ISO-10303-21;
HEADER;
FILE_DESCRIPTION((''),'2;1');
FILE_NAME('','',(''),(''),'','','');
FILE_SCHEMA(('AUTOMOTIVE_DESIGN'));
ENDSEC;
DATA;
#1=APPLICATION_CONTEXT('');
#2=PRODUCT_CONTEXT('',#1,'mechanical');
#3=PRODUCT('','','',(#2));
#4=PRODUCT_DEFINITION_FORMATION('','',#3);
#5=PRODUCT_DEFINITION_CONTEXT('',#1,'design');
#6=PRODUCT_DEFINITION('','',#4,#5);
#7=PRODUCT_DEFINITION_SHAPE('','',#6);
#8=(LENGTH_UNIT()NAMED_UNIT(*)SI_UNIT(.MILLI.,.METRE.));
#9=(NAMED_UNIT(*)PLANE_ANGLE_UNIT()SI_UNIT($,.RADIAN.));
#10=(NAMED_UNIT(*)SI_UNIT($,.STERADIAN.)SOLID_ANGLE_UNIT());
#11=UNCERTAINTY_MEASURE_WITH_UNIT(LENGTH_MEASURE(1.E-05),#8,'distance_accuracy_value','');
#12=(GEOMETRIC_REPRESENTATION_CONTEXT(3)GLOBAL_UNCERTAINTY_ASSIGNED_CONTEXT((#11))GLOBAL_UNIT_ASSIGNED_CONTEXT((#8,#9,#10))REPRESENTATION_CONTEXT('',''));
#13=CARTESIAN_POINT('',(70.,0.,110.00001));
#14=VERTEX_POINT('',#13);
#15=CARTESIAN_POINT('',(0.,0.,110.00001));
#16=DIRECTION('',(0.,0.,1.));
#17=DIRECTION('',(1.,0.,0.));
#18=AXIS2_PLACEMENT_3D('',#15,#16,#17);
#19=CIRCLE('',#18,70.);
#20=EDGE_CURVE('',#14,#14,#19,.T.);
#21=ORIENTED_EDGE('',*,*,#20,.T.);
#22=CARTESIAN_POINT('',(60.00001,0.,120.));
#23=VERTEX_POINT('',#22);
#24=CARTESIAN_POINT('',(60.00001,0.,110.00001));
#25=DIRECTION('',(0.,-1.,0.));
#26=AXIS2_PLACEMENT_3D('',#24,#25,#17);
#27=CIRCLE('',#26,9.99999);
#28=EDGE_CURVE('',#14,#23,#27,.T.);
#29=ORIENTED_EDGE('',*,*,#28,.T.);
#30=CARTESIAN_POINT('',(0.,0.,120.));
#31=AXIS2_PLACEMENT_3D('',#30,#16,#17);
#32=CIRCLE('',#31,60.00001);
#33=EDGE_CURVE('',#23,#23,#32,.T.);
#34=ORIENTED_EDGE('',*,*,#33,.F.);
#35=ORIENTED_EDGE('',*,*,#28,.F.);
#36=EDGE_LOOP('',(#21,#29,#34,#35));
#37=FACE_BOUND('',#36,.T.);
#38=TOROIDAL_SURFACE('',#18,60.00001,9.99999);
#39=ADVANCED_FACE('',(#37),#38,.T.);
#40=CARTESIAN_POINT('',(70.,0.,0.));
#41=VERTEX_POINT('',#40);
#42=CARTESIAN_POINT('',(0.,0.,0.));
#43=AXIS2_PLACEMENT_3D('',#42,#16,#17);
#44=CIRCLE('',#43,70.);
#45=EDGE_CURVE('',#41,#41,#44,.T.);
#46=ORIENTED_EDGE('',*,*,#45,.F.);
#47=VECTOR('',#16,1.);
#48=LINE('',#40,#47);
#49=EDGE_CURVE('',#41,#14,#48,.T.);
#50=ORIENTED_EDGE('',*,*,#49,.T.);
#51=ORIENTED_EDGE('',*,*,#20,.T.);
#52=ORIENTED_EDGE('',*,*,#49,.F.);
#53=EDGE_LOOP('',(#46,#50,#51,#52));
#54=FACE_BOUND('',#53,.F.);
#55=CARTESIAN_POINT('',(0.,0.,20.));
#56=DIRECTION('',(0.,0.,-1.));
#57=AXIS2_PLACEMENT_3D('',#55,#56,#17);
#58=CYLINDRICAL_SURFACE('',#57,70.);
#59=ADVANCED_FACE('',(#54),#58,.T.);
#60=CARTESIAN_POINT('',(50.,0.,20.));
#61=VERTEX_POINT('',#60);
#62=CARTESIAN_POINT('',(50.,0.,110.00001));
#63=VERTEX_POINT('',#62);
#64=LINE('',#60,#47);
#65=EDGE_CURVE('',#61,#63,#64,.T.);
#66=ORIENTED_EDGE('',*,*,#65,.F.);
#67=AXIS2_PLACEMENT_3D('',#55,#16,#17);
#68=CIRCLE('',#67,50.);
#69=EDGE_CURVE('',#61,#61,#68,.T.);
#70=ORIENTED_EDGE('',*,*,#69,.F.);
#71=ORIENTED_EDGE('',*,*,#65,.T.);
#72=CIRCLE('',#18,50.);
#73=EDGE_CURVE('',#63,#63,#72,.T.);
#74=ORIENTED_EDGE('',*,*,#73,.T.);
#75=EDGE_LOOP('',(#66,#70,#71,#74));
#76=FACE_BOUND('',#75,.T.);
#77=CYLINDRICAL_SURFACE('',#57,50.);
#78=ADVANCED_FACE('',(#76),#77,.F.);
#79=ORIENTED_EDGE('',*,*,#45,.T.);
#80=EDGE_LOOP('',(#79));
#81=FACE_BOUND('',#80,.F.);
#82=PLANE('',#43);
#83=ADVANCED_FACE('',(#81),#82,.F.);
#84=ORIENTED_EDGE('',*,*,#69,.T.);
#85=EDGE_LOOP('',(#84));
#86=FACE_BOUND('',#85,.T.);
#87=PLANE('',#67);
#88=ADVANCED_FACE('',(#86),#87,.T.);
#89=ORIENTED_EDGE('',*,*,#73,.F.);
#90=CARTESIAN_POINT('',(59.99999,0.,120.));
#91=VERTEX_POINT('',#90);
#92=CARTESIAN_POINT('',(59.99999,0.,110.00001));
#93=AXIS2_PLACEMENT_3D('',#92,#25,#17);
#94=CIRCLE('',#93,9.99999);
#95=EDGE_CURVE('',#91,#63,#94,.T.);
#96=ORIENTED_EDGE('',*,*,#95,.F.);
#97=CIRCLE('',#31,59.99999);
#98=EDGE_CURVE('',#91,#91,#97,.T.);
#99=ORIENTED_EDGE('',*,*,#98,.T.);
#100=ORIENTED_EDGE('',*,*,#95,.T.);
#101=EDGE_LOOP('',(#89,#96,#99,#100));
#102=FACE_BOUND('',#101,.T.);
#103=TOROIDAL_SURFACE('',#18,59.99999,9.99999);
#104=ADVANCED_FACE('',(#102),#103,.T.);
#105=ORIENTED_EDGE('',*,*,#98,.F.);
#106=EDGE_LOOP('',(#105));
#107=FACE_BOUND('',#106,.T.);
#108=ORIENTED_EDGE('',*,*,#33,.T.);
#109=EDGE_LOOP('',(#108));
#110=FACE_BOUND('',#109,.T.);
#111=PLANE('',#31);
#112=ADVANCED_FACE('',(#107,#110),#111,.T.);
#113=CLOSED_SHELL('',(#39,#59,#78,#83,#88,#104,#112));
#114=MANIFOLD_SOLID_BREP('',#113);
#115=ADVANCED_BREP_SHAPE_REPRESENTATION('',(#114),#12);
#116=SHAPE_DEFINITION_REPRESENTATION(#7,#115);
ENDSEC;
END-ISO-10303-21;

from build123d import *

# Parameters (mm, degrees)
F2_R     = 70
F3_DEPTH = 20
F4_R     = 70
F4_R_2   = 50
F5_DEPTH = 100
F6_R     = 9.99999


# Not quite as in the source:
# - a fillet or chamfer is up to 0.001 mm smaller than in the source, because OpenCascade refuses the exact size


with BuildPart() as f3:
    # F2 (on Top) → F3 (new body)
    with BuildSketch(Plane.XY):
        Circle(F2_R)
    extrude(amount=F3_DEPTH)

    # F4 (on face) → F5 (join)
    with BuildSketch(Plane.XY.offset(20)):
        Circle(F4_R)
        Circle(F4_R_2, mode=Mode.SUBTRACT)
    extrude(amount=F5_DEPTH)

    # F6 (radius 10 in the source; OpenCascade refuses exactly that, so slightly less here)
    f6_edges = [f3.edges().sort_by_distance(p)[0] for p in [
        (-50, 0, 120),
        (-70, 0, 120),
    ]]
    fillet(f6_edges, radius=F6_R)


solid = f3.part
